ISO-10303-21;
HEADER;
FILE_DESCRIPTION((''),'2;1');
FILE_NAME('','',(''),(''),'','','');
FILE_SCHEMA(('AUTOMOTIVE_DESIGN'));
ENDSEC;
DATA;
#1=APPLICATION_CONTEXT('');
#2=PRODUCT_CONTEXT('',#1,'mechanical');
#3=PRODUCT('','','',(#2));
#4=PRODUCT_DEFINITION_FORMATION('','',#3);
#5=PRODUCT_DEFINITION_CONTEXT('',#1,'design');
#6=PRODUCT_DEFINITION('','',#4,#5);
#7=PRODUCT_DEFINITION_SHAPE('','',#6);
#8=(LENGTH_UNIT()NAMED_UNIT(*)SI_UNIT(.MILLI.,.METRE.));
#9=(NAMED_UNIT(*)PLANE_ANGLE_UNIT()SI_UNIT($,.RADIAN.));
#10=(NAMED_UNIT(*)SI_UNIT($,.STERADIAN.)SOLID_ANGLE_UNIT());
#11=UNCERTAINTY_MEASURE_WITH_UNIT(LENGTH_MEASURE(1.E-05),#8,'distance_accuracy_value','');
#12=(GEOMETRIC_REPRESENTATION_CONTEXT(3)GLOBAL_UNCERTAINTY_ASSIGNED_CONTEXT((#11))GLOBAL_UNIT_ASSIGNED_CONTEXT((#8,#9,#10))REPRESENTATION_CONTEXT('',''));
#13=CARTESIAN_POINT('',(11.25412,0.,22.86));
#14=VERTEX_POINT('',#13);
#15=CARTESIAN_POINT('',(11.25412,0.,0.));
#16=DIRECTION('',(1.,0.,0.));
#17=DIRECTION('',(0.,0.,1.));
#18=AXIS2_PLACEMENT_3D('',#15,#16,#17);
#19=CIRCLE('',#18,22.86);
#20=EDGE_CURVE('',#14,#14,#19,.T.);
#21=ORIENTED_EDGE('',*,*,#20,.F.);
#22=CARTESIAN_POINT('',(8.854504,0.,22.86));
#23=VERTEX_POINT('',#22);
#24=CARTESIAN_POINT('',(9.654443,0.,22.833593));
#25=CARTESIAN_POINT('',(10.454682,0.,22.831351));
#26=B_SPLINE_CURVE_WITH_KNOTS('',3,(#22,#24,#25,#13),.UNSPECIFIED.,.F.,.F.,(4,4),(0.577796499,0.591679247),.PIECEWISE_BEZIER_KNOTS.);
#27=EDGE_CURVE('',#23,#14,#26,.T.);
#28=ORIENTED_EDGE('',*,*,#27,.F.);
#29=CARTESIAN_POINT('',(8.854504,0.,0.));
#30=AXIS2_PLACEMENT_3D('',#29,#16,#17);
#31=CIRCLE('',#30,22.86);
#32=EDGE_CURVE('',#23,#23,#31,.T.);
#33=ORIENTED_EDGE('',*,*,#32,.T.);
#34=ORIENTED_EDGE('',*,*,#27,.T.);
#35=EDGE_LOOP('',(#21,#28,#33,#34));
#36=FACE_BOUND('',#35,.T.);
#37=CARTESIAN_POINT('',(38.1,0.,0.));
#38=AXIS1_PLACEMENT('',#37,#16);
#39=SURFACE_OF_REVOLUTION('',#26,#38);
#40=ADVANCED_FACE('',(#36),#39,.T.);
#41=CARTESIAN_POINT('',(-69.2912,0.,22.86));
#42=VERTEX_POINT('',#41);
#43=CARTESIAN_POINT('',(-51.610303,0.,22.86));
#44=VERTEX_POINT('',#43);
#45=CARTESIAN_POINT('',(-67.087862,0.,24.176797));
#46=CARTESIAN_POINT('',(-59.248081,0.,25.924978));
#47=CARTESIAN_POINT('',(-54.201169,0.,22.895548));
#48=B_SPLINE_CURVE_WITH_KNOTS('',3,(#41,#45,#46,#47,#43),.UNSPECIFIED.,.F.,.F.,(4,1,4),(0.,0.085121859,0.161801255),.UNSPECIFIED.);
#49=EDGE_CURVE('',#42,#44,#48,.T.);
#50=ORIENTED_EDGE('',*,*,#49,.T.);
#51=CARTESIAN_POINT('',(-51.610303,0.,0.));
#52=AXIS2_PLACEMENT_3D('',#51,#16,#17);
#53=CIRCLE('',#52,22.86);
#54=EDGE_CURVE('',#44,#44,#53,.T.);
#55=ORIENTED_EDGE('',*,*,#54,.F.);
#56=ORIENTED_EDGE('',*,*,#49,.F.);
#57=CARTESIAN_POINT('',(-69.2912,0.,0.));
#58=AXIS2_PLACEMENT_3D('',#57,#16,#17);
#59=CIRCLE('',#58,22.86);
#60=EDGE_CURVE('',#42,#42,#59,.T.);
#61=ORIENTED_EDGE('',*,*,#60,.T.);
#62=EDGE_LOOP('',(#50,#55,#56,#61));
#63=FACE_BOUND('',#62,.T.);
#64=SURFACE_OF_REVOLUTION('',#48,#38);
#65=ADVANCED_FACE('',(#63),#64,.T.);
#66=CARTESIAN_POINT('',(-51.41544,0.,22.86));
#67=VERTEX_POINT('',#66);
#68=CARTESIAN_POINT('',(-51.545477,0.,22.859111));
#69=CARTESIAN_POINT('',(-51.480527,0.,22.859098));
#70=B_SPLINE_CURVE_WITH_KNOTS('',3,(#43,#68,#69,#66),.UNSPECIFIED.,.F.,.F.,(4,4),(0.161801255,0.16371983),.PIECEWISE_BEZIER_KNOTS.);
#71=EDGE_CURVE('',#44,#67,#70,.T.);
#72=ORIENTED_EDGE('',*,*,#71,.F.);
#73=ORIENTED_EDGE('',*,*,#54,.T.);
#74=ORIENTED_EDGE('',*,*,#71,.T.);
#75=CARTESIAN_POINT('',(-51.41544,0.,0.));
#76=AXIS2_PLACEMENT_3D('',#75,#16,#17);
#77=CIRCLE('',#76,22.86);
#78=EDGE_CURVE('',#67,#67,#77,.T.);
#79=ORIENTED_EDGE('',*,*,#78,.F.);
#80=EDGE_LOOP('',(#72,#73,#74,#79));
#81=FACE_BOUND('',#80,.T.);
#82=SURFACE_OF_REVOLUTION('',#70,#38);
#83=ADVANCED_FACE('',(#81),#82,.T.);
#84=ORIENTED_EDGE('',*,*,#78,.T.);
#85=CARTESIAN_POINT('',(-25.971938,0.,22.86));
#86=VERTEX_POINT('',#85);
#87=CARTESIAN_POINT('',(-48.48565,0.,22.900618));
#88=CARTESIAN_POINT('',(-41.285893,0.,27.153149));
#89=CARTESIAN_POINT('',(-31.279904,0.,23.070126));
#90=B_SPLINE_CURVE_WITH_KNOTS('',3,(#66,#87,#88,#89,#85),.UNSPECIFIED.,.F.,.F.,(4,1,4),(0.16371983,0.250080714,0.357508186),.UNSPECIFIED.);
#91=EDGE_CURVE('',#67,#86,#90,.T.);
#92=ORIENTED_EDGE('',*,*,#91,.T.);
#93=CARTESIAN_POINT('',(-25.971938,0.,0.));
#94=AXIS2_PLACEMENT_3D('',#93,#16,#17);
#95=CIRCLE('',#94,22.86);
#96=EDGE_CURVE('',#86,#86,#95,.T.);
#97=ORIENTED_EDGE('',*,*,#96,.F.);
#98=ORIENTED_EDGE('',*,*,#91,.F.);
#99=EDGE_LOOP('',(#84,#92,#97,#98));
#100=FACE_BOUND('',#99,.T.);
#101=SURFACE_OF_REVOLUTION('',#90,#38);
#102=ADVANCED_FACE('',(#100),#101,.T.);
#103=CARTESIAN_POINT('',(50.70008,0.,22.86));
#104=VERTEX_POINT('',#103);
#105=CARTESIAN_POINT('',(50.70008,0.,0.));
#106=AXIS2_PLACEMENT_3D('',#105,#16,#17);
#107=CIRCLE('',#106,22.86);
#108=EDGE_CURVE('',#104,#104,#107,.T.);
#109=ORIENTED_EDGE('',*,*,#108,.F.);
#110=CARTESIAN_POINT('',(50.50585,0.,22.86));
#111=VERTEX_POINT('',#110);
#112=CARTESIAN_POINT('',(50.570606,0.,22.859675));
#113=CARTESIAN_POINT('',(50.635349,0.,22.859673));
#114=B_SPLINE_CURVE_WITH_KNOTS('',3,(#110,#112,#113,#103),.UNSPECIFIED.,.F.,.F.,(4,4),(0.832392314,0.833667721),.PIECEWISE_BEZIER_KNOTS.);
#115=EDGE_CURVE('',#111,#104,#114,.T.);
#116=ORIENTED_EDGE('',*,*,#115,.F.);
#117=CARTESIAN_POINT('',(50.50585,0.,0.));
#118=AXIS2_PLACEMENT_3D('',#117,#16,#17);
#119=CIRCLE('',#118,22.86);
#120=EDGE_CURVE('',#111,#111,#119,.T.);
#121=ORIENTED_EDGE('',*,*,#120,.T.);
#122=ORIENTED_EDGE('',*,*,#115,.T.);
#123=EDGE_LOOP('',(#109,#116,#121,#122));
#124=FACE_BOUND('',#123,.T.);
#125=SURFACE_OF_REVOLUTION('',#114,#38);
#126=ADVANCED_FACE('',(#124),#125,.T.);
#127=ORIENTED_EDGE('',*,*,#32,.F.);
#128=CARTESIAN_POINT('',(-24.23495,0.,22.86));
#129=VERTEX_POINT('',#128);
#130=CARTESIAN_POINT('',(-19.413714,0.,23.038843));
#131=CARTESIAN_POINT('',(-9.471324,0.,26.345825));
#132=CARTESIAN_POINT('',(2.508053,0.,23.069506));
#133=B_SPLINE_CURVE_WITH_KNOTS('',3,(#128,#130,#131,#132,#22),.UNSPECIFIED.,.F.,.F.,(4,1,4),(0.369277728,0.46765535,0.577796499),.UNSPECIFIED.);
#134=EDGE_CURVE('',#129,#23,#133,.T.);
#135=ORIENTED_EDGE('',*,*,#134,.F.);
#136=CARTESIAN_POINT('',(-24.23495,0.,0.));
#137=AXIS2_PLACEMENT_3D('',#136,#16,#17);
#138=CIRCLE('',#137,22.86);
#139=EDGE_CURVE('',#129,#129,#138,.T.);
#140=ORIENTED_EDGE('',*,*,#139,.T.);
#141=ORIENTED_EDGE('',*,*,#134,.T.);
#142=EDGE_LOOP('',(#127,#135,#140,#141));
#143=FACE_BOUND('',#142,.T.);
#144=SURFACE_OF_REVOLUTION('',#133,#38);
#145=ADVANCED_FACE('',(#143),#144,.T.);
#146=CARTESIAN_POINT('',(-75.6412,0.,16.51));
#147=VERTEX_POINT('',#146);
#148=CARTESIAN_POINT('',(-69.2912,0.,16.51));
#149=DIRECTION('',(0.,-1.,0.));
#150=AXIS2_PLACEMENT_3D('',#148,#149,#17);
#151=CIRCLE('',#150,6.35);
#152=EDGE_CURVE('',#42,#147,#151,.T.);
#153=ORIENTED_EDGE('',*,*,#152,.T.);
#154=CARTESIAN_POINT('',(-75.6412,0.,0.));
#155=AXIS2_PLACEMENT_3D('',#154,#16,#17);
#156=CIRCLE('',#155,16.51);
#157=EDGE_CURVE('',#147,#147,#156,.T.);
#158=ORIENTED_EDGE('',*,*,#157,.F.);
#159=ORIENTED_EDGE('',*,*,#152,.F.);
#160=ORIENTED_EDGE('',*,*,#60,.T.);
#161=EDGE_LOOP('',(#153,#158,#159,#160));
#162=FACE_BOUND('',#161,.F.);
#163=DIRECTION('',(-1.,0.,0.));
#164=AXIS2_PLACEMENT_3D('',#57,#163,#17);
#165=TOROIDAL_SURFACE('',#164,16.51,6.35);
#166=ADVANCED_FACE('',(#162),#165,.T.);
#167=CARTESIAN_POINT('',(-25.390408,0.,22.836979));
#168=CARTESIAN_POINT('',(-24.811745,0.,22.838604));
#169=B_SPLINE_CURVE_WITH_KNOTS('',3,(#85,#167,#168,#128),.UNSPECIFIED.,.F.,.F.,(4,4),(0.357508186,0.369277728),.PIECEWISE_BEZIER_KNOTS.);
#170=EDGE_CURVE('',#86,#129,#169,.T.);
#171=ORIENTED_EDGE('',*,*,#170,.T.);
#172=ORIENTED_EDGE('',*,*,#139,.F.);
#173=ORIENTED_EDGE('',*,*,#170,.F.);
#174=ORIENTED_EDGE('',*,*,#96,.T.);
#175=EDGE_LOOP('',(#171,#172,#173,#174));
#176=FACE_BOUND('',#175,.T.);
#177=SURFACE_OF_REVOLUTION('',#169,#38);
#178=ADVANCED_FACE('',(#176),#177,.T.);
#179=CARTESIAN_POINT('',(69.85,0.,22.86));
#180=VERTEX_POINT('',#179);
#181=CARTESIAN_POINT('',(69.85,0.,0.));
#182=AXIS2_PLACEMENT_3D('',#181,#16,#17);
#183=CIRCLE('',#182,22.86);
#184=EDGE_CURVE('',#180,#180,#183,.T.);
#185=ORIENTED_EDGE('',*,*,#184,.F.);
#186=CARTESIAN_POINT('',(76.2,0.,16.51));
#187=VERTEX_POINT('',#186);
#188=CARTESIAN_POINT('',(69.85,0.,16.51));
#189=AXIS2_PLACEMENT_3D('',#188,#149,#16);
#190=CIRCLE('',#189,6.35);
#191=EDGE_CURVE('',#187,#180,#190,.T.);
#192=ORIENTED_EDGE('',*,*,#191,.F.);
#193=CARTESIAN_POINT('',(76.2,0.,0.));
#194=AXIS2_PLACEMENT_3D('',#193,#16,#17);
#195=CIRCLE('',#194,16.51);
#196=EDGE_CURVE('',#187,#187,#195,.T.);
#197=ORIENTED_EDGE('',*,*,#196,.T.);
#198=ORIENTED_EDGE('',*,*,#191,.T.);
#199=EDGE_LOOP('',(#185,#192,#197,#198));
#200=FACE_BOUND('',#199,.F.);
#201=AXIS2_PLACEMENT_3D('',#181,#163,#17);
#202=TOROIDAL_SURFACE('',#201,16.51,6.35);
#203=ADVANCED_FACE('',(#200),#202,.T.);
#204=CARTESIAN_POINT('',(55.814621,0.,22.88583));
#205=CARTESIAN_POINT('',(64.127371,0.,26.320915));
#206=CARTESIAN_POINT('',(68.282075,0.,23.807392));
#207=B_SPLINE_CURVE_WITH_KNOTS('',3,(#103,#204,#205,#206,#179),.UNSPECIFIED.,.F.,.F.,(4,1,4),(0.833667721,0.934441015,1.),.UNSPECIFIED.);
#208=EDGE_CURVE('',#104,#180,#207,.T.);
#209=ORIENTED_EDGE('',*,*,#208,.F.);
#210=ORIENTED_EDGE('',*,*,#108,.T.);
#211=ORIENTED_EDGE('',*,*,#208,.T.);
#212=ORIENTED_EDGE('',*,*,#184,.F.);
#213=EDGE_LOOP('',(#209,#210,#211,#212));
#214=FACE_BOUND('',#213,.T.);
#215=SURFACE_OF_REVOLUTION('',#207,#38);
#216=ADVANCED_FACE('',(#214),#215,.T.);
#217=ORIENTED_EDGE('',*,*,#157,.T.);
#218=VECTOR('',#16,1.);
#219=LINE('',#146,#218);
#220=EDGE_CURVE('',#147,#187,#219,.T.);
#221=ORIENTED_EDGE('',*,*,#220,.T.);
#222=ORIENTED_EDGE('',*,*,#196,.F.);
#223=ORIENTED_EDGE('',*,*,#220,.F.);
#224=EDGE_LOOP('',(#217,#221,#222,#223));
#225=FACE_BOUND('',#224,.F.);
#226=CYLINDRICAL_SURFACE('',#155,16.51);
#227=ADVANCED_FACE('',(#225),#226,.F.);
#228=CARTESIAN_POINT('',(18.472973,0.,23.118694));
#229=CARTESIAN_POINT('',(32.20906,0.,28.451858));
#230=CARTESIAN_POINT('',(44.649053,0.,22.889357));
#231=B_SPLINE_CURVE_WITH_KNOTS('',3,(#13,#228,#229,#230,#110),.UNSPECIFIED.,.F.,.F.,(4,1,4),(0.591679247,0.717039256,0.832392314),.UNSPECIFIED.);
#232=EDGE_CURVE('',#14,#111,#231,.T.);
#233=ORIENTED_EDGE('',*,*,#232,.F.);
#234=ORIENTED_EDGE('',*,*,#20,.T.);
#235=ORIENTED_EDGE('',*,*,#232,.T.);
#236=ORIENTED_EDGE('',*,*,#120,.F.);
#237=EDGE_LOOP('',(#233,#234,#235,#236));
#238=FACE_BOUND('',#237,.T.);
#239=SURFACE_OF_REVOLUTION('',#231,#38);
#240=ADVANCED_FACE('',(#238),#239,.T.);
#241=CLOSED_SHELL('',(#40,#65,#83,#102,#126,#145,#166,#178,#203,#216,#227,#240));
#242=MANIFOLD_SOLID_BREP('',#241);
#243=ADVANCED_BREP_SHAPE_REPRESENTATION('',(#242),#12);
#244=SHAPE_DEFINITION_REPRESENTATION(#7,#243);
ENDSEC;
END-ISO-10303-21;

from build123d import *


with BuildPart() as f1:
    # F0 (on Front) → F1 (revolve)
    with BuildSketch(Plane.XZ):
        with BuildLine():
            Line((-75.6412, 16.51), (76.2, 16.51))
            ThreePointArc((76.2, 16.51), (74.3401280605, 21.0001280605), (69.85, 22.86))
            Line((69.85, 22.86), (50.7000796497, 22.86))
            add(Edge.make_bspline(
                [(50.5058497264, 22.86), (50.5706057369, 22.8596754076), (50.6353489577, 22.8596730925), (50.7000796497, 22.86)],
                knots=[0.8323923136, 0.8323923136, 0.8323923136, 0.8323923136, 0.8336677213, 0.8336677213, 0.8336677213, 0.8336677213], degree=3))
            Line((50.5058497264, 22.86), (11.2541196868, 22.86))
            add(Edge.make_bspline(
                [(8.8545044549, 22.86), (9.654443387, 22.8335928328), (10.4546819055, 22.8313514547), (11.2541196868, 22.86)],
                knots=[0.5777964989, 0.5777964989, 0.5777964989, 0.5777964989, 0.5916792469, 0.5916792469, 0.5916792469, 0.5916792469], degree=3))
            Line((8.8545044549, 22.86), (-24.2349496389, 22.86))
            add(Edge.make_bspline(
                [(-25.9719379246, 22.86), (-25.3904076002, 22.836978978), (-24.8117447825, 22.8386038349), (-24.2349496389, 22.86)],
                knots=[0.357508186, 0.357508186, 0.357508186, 0.357508186, 0.3692777281, 0.3692777281, 0.3692777281, 0.3692777281], degree=3))
            Line((-25.9719379246, 22.86), (-51.4154396951, 22.86))
            add(Edge.make_bspline(
                [(-51.6103026405, 22.86), (-51.5454772703, 22.8591105526), (-51.4805272698, 22.8590976396), (-51.4154396951, 22.86)],
                knots=[0.1618012553, 0.1618012553, 0.1618012553, 0.1618012553, 0.1637198302, 0.1637198302, 0.1637198302, 0.1637198302], degree=3))
            Line((-51.6103026405, 22.86), (-69.2912, 22.86))
            ThreePointArc((-69.2912, 22.86), (-73.7813280605, 21.0001280605), (-75.6412, 16.51))
        make_face()
        with BuildLine():
            Line((50.7000796497, 22.86), (69.85, 22.86))
            add(Edge.make_bspline(
                [(50.7000796497, 22.86), (55.8146208152, 22.8858298184), (64.1273713818, 26.3209146353), (68.2820749394, 23.807391724), (69.85, 22.86)],
                knots=[0.8336677213, 0.8336677213, 0.8336677213, 0.8336677213, 0.9344410153, 1, 1, 1, 1], degree=3))
        make_face()
        with BuildLine():
            add(Edge.make_bspline(
                [(-69.2912, 22.86), (-67.0878619126, 24.1767972382), (-59.2480814587, 25.9249777514), (-54.201168592, 22.8955484125), (-51.6103026405, 22.86)],
                knots=[0, 0, 0, 0, 0.0851218586, 0.1618012553, 0.1618012553, 0.1618012553, 0.1618012553], degree=3))
            Line((-69.2912, 22.86), (-51.6103026405, 22.86))
        make_face()
        with BuildLine():
            Line((11.2541196868, 22.86), (50.5058497264, 22.86))
            add(Edge.make_bspline(
                [(11.2541196868, 22.86), (18.4729734076, 23.1186938759), (32.2090595343, 28.4518581182), (44.6490527547, 22.8893574606), (50.5058497264, 22.86)],
                knots=[0.5916792469, 0.5916792469, 0.5916792469, 0.5916792469, 0.717039256, 0.8323923136, 0.8323923136, 0.8323923136, 0.8323923136], degree=3))
        make_face()
        with BuildLine():
            add(Edge.make_bspline(
                [(-51.4154396951, 22.86), (-48.4856501908, 22.900617985), (-41.2858930569, 27.153149401), (-31.279904219, 23.0701262886), (-25.9719379246, 22.86)],
                knots=[0.1637198302, 0.1637198302, 0.1637198302, 0.1637198302, 0.2500807141, 0.357508186, 0.357508186, 0.357508186, 0.357508186], degree=3))
            Line((-51.4154396951, 22.86), (-25.9719379246, 22.86))
        make_face()
        with BuildLine():
            Line((-24.2349496389, 22.86), (8.8545044549, 22.86))
            add(Edge.make_bspline(
                [(-24.2349496389, 22.86), (-19.4137140956, 23.0388433081), (-9.4713243481, 26.34582534), (2.5080525383, 23.0695057634), (8.8545044549, 22.86)],
                knots=[0.3692777281, 0.3692777281, 0.3692777281, 0.3692777281, 0.4676553499, 0.5777964989, 0.5777964989, 0.5777964989, 0.5777964989], degree=3))
        make_face()
    revolve(axis=Axis((38.1, 0, 0), (1, 0, 0)))


solid = f1.part
